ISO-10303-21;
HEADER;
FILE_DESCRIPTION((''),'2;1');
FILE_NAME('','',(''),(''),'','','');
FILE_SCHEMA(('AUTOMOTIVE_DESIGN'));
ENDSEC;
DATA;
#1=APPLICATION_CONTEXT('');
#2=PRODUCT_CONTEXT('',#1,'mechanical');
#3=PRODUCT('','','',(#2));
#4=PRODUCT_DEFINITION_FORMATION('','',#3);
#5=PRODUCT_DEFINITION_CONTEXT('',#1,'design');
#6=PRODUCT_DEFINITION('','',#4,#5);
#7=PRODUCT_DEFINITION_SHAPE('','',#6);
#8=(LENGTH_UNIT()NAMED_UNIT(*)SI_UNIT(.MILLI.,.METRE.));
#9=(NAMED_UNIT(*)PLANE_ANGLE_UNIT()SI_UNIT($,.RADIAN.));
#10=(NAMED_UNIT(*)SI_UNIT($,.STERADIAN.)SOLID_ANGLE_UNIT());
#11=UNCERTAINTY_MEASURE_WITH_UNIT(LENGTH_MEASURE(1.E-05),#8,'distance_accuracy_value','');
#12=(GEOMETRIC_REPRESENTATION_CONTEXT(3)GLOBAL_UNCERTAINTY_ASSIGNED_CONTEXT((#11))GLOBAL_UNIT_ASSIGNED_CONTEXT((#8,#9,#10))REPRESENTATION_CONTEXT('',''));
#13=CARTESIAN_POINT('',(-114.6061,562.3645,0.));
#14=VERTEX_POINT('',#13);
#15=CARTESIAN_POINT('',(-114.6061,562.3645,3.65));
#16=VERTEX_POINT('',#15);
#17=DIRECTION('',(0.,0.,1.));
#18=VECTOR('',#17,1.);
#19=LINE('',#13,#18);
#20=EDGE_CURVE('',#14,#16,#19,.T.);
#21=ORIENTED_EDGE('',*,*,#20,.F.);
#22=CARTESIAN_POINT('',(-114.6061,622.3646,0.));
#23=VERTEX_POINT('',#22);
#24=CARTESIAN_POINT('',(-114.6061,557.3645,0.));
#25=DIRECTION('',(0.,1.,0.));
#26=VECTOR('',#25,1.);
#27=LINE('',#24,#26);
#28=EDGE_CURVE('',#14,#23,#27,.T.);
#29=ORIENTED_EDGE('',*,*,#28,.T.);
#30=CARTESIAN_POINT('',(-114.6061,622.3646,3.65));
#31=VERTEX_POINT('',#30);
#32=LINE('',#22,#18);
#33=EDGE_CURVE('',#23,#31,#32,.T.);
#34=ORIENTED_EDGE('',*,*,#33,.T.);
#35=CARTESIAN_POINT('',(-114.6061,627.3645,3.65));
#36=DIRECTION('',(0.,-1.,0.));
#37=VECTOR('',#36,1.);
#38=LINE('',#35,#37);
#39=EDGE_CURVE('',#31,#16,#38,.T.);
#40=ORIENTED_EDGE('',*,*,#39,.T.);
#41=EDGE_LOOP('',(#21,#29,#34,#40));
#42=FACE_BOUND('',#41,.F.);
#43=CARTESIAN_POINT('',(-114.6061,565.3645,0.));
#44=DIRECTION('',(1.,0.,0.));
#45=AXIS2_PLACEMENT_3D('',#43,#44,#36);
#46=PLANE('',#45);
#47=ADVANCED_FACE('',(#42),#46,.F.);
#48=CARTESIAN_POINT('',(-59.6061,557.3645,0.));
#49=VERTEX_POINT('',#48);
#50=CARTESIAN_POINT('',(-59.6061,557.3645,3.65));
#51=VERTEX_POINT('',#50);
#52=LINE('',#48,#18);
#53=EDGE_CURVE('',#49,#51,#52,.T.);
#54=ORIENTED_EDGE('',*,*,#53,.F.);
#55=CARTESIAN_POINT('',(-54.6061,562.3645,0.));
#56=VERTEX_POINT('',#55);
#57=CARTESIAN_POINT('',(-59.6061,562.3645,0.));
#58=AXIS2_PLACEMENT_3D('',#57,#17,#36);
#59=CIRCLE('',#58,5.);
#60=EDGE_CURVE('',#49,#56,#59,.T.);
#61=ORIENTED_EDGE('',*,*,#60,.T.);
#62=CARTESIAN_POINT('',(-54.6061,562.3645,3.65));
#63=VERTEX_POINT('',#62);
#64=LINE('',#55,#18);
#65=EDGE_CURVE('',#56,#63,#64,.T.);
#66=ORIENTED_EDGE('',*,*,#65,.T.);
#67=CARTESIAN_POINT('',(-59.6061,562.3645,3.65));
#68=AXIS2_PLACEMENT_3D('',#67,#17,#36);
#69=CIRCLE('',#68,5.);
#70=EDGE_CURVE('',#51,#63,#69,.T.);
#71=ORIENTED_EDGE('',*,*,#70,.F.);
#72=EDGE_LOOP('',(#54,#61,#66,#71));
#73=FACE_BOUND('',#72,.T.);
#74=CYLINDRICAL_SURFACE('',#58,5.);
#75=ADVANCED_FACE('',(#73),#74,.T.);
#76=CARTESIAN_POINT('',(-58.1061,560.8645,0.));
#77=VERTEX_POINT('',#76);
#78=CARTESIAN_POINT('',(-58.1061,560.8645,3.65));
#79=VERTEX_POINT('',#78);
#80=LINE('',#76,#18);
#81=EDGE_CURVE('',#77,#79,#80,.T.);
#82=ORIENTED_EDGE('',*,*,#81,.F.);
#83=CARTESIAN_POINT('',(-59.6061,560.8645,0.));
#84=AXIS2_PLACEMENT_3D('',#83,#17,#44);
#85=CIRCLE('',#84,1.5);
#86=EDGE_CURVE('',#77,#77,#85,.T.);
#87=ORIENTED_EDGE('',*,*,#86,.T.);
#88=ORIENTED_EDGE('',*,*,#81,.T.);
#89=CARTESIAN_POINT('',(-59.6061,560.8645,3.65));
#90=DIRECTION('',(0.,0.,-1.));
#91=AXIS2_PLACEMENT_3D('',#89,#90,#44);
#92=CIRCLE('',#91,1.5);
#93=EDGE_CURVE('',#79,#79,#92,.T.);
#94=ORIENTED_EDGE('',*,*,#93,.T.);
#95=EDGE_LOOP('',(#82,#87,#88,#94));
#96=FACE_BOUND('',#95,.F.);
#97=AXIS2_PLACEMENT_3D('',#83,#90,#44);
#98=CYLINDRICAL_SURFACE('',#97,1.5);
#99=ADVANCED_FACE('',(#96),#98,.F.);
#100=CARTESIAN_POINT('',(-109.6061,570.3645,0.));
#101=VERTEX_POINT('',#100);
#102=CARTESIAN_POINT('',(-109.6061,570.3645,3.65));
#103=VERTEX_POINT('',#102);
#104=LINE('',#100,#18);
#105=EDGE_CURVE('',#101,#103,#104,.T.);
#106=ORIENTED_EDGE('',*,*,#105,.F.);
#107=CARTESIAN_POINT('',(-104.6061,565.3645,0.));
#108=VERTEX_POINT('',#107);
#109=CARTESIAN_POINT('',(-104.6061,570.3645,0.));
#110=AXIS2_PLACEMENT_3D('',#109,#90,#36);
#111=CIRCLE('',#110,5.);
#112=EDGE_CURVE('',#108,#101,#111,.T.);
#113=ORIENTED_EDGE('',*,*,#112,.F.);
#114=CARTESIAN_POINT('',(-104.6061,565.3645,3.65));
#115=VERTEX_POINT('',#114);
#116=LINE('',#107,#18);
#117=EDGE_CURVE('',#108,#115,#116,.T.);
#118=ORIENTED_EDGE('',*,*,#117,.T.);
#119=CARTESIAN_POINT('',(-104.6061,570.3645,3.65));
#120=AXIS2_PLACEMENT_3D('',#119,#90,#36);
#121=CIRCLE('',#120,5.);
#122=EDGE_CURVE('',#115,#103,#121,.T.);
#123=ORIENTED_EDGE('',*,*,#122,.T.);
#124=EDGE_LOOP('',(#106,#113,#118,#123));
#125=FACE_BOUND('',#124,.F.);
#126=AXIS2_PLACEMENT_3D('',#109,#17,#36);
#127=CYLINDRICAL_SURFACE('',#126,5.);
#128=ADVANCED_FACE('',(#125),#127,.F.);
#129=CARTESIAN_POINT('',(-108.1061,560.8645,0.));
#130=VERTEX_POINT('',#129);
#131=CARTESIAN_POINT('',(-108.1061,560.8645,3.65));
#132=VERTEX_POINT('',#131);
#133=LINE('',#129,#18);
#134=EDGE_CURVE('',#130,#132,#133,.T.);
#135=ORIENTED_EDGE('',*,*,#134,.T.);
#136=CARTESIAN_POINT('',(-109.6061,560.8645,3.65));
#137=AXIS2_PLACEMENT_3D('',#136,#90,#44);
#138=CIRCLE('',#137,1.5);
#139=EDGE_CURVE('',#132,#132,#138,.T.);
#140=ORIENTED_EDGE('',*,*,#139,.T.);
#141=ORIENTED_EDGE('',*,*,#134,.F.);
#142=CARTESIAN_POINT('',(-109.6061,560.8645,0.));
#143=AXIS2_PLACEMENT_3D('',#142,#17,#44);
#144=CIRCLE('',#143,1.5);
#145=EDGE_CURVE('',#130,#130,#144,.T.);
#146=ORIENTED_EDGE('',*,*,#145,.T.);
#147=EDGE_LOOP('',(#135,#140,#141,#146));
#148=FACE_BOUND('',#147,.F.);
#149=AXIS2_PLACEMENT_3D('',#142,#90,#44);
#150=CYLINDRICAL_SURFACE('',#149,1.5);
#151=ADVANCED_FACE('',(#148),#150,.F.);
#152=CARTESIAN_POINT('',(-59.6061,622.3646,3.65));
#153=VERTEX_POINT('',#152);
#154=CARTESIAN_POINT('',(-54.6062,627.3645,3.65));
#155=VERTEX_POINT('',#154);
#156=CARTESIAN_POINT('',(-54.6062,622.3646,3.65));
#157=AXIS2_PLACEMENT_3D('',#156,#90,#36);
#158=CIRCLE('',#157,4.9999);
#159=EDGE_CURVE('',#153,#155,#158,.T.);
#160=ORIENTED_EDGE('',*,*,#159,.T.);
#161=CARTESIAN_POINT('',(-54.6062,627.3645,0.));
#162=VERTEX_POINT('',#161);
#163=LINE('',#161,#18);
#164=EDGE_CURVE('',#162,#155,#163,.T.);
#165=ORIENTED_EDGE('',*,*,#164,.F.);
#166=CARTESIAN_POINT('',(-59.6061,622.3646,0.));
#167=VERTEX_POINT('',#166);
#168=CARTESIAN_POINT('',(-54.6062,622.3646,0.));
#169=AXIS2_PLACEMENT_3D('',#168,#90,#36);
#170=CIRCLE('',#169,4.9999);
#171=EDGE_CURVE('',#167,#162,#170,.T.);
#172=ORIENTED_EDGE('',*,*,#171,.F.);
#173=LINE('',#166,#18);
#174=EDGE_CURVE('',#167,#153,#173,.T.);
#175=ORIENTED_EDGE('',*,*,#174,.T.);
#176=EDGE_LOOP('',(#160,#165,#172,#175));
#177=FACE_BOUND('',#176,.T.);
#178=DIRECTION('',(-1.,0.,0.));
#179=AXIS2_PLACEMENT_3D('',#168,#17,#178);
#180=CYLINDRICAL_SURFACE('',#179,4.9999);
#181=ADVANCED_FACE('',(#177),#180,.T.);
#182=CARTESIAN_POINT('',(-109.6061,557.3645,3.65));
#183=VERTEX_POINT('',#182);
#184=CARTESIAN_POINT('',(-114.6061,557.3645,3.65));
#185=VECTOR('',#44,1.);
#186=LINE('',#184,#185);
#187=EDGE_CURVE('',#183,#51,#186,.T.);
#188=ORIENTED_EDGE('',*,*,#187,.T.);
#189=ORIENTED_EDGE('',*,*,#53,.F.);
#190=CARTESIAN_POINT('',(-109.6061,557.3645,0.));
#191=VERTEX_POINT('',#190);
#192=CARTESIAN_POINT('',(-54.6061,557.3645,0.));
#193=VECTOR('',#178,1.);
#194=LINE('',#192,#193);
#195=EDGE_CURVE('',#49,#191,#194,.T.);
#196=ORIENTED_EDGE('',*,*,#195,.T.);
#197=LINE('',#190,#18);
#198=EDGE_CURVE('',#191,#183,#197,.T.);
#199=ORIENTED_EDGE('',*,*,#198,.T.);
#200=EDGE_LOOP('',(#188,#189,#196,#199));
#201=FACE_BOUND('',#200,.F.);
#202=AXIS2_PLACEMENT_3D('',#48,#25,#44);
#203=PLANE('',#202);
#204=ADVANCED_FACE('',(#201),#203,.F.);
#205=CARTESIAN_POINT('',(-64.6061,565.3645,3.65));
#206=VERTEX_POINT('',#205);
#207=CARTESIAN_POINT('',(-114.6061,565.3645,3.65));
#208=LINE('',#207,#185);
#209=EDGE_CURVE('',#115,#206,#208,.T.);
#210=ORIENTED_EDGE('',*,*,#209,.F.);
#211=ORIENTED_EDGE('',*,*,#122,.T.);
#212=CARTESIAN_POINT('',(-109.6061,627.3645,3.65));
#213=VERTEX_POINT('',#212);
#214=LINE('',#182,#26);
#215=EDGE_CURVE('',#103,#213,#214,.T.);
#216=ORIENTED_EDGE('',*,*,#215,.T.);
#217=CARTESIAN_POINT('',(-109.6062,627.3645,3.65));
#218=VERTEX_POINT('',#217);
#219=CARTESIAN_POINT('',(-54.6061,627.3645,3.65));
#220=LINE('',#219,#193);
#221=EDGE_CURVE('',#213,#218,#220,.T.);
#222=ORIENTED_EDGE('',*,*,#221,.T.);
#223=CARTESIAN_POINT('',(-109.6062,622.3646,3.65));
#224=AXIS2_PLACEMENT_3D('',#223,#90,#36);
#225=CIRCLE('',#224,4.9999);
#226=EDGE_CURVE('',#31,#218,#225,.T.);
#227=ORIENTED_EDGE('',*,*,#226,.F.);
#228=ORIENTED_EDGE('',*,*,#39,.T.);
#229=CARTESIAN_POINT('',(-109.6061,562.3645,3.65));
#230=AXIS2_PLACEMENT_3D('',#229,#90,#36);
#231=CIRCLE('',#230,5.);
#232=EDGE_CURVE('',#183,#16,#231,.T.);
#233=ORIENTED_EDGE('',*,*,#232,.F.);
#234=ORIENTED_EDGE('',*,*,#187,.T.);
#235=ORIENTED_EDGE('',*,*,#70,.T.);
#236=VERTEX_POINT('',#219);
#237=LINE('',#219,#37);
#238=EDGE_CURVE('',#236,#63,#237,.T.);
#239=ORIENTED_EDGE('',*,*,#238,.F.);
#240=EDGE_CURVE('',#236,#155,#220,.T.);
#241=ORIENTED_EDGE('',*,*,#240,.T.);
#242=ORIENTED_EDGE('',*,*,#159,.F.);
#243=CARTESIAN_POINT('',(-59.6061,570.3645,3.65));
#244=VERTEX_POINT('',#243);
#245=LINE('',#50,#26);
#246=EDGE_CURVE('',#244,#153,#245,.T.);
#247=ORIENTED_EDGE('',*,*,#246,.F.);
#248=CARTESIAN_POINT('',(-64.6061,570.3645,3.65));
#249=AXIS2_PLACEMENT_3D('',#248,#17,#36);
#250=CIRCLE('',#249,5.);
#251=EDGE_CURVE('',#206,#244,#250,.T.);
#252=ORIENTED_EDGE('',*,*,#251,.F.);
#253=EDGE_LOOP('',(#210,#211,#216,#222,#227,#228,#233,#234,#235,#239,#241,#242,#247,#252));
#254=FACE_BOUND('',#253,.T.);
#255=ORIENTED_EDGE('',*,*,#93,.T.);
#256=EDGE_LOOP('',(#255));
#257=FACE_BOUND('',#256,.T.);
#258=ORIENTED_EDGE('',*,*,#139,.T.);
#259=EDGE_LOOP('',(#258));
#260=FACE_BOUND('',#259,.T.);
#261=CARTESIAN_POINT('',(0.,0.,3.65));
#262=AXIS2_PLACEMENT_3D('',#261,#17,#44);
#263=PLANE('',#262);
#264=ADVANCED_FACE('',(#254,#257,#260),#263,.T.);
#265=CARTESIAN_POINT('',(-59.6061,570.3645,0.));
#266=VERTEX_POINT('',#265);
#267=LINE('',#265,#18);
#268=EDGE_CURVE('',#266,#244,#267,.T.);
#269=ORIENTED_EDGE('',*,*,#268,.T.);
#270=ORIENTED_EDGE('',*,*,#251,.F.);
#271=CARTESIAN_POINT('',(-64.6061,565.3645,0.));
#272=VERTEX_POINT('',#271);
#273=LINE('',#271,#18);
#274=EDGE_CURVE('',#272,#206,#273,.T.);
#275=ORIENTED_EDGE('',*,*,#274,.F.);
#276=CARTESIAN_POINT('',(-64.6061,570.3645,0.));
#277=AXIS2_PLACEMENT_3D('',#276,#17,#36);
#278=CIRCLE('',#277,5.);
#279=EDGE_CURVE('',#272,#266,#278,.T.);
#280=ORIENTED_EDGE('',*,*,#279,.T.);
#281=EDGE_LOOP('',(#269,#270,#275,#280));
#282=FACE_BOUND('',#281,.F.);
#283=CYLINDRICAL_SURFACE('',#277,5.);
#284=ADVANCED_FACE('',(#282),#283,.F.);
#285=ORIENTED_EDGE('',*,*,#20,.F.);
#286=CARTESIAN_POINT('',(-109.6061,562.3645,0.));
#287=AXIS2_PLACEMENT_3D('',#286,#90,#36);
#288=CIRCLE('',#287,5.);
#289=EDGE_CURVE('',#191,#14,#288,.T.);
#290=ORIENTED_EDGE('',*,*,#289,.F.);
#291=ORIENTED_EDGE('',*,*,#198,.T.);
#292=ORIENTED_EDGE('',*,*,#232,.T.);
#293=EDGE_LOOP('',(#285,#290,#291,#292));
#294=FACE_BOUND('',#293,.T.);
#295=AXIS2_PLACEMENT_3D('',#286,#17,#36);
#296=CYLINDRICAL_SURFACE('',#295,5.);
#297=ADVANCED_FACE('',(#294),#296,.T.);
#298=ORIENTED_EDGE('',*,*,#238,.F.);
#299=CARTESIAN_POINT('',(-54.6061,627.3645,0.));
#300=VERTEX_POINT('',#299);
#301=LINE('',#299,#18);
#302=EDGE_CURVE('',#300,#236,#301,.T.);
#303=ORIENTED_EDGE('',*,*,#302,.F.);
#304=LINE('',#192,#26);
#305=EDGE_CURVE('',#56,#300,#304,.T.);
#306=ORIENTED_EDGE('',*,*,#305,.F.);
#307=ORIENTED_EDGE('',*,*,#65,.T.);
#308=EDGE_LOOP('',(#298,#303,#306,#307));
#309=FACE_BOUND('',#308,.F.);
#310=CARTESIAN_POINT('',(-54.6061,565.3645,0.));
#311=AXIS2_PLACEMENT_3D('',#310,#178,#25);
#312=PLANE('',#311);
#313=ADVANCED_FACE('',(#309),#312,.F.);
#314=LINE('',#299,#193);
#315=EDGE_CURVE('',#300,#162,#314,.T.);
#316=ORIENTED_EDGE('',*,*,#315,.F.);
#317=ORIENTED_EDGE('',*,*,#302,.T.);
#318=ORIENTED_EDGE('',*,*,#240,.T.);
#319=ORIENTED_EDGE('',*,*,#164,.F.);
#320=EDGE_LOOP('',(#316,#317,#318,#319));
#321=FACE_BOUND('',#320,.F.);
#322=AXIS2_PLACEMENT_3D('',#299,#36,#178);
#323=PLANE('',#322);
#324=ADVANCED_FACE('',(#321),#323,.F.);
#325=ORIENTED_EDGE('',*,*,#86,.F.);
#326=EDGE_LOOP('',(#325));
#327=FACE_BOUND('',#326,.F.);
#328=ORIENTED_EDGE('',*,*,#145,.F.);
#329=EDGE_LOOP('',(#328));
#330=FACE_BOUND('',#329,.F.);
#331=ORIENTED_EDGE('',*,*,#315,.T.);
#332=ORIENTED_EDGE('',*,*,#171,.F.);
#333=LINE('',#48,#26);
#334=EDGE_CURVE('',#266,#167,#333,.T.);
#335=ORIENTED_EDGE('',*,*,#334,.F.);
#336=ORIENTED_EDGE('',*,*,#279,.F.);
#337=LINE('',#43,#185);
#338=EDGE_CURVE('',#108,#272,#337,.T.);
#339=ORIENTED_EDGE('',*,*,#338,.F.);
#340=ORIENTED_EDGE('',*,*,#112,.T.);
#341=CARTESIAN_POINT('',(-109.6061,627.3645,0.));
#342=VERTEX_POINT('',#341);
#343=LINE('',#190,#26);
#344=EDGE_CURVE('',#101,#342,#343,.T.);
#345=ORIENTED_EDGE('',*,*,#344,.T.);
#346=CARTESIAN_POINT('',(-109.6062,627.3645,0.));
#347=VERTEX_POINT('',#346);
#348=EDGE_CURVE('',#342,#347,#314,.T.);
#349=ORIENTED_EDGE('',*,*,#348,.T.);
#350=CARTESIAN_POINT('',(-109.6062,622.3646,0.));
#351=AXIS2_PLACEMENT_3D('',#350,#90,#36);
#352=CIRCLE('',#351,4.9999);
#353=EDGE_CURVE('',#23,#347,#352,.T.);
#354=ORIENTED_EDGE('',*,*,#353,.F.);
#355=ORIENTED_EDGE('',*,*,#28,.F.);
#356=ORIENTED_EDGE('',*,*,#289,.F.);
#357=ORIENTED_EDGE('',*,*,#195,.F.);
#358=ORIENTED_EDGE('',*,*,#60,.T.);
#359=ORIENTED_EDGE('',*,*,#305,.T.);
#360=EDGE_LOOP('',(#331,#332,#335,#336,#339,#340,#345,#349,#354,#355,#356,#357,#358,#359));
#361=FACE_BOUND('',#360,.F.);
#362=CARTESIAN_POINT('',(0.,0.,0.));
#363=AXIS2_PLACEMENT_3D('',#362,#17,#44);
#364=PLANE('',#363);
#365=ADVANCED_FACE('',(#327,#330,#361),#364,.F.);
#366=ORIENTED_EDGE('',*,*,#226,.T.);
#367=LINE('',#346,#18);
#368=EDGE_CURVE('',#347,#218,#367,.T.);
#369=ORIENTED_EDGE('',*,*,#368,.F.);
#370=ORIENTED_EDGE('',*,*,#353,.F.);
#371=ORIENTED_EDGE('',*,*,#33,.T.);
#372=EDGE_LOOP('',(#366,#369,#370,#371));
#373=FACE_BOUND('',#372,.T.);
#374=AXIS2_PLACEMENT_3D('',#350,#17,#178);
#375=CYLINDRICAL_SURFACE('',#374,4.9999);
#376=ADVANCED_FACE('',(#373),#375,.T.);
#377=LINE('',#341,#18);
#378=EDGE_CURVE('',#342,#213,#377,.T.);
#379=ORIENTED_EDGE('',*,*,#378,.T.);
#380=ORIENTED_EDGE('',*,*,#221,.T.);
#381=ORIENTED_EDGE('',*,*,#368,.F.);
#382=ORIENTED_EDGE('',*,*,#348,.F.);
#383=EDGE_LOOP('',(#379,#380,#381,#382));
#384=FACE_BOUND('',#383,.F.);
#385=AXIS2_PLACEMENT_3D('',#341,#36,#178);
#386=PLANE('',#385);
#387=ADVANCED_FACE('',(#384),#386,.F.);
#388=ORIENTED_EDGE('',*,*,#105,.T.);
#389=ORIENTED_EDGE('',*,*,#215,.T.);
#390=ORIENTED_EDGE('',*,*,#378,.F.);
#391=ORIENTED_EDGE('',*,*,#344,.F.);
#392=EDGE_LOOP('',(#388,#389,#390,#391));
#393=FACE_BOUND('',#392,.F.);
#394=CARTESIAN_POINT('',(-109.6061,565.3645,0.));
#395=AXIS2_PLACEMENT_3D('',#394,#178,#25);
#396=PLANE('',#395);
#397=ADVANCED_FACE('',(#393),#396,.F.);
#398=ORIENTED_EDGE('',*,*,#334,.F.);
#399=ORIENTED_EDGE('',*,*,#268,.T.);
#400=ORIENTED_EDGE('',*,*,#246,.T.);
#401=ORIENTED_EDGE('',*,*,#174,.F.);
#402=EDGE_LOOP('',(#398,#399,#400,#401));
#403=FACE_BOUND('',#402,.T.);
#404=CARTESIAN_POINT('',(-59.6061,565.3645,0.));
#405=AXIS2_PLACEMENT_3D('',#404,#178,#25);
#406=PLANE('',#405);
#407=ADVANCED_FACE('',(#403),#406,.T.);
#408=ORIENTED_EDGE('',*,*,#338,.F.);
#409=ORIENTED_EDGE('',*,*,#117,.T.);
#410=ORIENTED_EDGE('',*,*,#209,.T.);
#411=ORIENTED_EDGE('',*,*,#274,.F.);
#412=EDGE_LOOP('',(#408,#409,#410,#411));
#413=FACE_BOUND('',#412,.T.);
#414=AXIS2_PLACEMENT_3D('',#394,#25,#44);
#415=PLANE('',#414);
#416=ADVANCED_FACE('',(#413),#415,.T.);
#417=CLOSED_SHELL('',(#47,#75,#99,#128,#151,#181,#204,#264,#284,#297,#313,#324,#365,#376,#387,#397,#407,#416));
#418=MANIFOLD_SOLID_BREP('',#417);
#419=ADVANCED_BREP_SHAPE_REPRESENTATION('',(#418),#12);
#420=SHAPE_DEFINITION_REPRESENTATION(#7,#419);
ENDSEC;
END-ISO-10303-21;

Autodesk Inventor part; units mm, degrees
ref_plane "YZ Plane" through (0, 0, 0) normal (1, 0, 0) x (0, 1, 0)
ref_plane "XZ Plane" through (0, 0, 0) normal (0, 1, 0) x (-1, 0, 0)
ref_plane "XY Plane" through (0, 0, 0) normal (0, 0, 1) x (1, 0, 0)
ref_plane "РабПлоскость1" through (0, 0, 0) normal (0, 0, 1) x (1, 0, 0)
sketch "Эскиз1" plane through (0, 0, 0) normal (0, 0, 1) x (1, 0, 0)
  line L0 (-54.6061, 570.3445) -> (-45.6061, 570.3445) projected
  line L1 (-45.6061, 570.3445) -> (-45.6061, 587.3445) projected
  line L2 (-45.6061, 587.3445) -> (-54.6061, 587.3445) projected
  line L3 (-54.6061, 587.3445) -> (-54.6061, 627.3645) projected
  line L4 (-54.6061, 627.3645) -> (-114.6061, 627.3645) projected
  line L5 (-114.6061, 627.3645) -> (-114.6061, 587.3445) projected
  line L6 (-114.6061, 587.3445) -> (-123.6061, 587.3445) projected
  line L7 (-123.6061, 587.3445) -> (-123.6061, 570.3445) projected
  line L8 (-123.6061, 570.3445) -> (-114.6061, 570.3445) projected
  line L9 (-114.6061, 570.3445) -> (-114.6061, 557.3645) projected
  line L10 (-114.6061, 557.3645) -> (-54.6061, 557.3645) projected
  line L11 (-54.6061, 557.3645) -> (-54.6061, 570.3445) projected
  line L12 (-48.6061, 575.3445) -> (-51.6061, 575.3445) projected
  line L13 (-51.6061, 575.3445) -> (-51.6061, 582.3445) projected
  line L14 (-51.6061, 582.3445) -> (-48.6061, 582.3445) projected
  line L15 (-48.6061, 582.3445) -> (-48.6061, 575.3445) projected
  line L16 (-117.6061, 582.3445) -> (-117.6061, 575.3445) projected
  line L17 (-117.6061, 575.3445) -> (-120.6061, 575.3445) projected
  line L18 (-120.6061, 575.3445) -> (-120.6061, 582.3445) projected
  line L19 (-120.6061, 582.3445) -> (-117.6061, 582.3445) projected
  circle A0 centre (-97.1061, 577.3245) radius 2.575 projected
  circle A1 centre (-72.1061, 577.3245) radius 2.575 projected
  circle A2 centre (-72.1061, 617.3645) radius 2.575 projected
  circle A3 centre (-97.1061, 617.3645) radius 2.575 projected
  circle A4 centre (-109.6061, 560.8645) radius 1.5 projected
  circle A5 centre (-59.6061, 560.8645) radius 1.5 projected
  circle A6 centre (-106.1061, 572.3645) radius 1 projected
  circle A7 centre (-63.1061, 572.3645) radius 1 projected
  circle A8 centre (-106.1061, 587.3645) radius 1 projected
  circle A9 centre (-63.1061, 587.3645) radius 1 projected
  circle A10 centre (-106.1061, 602.3645) radius 1 projected
  circle A11 centre (-63.1061, 602.3645) radius 1 projected
  circle A12 centre (-106.1061, 617.3645) radius 1 projected
  circle A13 centre (-63.1061, 617.3645) radius 1 projected
  line L20 (-59.6061, 627.3645) -> (-54.6061, 627.3645)
  line L21 (-54.6061, 627.3645) -> (-54.6061, 557.3645)
  line L22 (-54.6061, 557.3645) -> (-59.6061, 557.3645)
  line L23 (-59.6061, 557.3645) -> (-59.6061, 627.3645)
  line L24 (-54.6061, 557.3645) -> (-114.6061, 557.3645)
  line L25 (-114.6061, 557.3645) -> (-114.6061, 565.3645)
  line L26 (-114.6061, 565.3645) -> (-54.6061, 565.3645)
  line L27 (-54.6061, 565.3645) -> (-54.6061, 557.3645)
  line L28 (-114.6061, 557.3645) -> (-109.6061, 557.3645)
  line L29 (-109.6061, 557.3645) -> (-109.6061, 627.3645)
  line L30 (-109.6061, 627.3645) -> (-114.6061, 627.3645)
  line L31 (-114.6061, 627.3645) -> (-114.6061, 557.3645)
  circle A14 centre (-59.6061, 560.8645) radius 1.5
  circle A15 centre (-109.6061, 560.8645) radius 1.5
  point P0 (0, 0)
  point P1 (-59.6061, 565.3645)
  point P2 (-109.6061, 565.3645)
  dimension "d0" = 5
  dimension "d1" = 5
  dimension "d2" = 8
extrude "Выдавливание1" add sketch "Эскиз1" along normal blind 3.65 contours L11 L26 L23 L4 L3 L21 | L11 L10 L23 A5 L26 | L23 A5 L10 L29 A4 L26 | L29 A4 L10 L9 L26 | L26 L9 L31 L5 L4 L29
fillet "Сопряжение грани1" radius 5 1 edges at (-109.6061, 565.3645, 1.825)
fillet "Сопряжение грани2" radius 5 1 edges at (-59.6061, 565.3645, 1.825)
fillet "Сопряжение грани3" radius 5 1 edges at (-59.6061, 627.3645, 1.825)
fillet "Сопряжение грани4" radius 5 1 edges at (-114.6061, 627.3645, 1.825)
feature "Сопряжение грани5" [suppressed]
feature "Сопряжение грани6" [suppressed]
fillet "Сопряжение грани7" radius 5 1 edges at (-54.6061, 557.3645, 1.825)
fillet "Сопряжение грани8" radius 5 1 edges at (-114.6061, 557.3645, 1.825)
properties part number "соединялка"
